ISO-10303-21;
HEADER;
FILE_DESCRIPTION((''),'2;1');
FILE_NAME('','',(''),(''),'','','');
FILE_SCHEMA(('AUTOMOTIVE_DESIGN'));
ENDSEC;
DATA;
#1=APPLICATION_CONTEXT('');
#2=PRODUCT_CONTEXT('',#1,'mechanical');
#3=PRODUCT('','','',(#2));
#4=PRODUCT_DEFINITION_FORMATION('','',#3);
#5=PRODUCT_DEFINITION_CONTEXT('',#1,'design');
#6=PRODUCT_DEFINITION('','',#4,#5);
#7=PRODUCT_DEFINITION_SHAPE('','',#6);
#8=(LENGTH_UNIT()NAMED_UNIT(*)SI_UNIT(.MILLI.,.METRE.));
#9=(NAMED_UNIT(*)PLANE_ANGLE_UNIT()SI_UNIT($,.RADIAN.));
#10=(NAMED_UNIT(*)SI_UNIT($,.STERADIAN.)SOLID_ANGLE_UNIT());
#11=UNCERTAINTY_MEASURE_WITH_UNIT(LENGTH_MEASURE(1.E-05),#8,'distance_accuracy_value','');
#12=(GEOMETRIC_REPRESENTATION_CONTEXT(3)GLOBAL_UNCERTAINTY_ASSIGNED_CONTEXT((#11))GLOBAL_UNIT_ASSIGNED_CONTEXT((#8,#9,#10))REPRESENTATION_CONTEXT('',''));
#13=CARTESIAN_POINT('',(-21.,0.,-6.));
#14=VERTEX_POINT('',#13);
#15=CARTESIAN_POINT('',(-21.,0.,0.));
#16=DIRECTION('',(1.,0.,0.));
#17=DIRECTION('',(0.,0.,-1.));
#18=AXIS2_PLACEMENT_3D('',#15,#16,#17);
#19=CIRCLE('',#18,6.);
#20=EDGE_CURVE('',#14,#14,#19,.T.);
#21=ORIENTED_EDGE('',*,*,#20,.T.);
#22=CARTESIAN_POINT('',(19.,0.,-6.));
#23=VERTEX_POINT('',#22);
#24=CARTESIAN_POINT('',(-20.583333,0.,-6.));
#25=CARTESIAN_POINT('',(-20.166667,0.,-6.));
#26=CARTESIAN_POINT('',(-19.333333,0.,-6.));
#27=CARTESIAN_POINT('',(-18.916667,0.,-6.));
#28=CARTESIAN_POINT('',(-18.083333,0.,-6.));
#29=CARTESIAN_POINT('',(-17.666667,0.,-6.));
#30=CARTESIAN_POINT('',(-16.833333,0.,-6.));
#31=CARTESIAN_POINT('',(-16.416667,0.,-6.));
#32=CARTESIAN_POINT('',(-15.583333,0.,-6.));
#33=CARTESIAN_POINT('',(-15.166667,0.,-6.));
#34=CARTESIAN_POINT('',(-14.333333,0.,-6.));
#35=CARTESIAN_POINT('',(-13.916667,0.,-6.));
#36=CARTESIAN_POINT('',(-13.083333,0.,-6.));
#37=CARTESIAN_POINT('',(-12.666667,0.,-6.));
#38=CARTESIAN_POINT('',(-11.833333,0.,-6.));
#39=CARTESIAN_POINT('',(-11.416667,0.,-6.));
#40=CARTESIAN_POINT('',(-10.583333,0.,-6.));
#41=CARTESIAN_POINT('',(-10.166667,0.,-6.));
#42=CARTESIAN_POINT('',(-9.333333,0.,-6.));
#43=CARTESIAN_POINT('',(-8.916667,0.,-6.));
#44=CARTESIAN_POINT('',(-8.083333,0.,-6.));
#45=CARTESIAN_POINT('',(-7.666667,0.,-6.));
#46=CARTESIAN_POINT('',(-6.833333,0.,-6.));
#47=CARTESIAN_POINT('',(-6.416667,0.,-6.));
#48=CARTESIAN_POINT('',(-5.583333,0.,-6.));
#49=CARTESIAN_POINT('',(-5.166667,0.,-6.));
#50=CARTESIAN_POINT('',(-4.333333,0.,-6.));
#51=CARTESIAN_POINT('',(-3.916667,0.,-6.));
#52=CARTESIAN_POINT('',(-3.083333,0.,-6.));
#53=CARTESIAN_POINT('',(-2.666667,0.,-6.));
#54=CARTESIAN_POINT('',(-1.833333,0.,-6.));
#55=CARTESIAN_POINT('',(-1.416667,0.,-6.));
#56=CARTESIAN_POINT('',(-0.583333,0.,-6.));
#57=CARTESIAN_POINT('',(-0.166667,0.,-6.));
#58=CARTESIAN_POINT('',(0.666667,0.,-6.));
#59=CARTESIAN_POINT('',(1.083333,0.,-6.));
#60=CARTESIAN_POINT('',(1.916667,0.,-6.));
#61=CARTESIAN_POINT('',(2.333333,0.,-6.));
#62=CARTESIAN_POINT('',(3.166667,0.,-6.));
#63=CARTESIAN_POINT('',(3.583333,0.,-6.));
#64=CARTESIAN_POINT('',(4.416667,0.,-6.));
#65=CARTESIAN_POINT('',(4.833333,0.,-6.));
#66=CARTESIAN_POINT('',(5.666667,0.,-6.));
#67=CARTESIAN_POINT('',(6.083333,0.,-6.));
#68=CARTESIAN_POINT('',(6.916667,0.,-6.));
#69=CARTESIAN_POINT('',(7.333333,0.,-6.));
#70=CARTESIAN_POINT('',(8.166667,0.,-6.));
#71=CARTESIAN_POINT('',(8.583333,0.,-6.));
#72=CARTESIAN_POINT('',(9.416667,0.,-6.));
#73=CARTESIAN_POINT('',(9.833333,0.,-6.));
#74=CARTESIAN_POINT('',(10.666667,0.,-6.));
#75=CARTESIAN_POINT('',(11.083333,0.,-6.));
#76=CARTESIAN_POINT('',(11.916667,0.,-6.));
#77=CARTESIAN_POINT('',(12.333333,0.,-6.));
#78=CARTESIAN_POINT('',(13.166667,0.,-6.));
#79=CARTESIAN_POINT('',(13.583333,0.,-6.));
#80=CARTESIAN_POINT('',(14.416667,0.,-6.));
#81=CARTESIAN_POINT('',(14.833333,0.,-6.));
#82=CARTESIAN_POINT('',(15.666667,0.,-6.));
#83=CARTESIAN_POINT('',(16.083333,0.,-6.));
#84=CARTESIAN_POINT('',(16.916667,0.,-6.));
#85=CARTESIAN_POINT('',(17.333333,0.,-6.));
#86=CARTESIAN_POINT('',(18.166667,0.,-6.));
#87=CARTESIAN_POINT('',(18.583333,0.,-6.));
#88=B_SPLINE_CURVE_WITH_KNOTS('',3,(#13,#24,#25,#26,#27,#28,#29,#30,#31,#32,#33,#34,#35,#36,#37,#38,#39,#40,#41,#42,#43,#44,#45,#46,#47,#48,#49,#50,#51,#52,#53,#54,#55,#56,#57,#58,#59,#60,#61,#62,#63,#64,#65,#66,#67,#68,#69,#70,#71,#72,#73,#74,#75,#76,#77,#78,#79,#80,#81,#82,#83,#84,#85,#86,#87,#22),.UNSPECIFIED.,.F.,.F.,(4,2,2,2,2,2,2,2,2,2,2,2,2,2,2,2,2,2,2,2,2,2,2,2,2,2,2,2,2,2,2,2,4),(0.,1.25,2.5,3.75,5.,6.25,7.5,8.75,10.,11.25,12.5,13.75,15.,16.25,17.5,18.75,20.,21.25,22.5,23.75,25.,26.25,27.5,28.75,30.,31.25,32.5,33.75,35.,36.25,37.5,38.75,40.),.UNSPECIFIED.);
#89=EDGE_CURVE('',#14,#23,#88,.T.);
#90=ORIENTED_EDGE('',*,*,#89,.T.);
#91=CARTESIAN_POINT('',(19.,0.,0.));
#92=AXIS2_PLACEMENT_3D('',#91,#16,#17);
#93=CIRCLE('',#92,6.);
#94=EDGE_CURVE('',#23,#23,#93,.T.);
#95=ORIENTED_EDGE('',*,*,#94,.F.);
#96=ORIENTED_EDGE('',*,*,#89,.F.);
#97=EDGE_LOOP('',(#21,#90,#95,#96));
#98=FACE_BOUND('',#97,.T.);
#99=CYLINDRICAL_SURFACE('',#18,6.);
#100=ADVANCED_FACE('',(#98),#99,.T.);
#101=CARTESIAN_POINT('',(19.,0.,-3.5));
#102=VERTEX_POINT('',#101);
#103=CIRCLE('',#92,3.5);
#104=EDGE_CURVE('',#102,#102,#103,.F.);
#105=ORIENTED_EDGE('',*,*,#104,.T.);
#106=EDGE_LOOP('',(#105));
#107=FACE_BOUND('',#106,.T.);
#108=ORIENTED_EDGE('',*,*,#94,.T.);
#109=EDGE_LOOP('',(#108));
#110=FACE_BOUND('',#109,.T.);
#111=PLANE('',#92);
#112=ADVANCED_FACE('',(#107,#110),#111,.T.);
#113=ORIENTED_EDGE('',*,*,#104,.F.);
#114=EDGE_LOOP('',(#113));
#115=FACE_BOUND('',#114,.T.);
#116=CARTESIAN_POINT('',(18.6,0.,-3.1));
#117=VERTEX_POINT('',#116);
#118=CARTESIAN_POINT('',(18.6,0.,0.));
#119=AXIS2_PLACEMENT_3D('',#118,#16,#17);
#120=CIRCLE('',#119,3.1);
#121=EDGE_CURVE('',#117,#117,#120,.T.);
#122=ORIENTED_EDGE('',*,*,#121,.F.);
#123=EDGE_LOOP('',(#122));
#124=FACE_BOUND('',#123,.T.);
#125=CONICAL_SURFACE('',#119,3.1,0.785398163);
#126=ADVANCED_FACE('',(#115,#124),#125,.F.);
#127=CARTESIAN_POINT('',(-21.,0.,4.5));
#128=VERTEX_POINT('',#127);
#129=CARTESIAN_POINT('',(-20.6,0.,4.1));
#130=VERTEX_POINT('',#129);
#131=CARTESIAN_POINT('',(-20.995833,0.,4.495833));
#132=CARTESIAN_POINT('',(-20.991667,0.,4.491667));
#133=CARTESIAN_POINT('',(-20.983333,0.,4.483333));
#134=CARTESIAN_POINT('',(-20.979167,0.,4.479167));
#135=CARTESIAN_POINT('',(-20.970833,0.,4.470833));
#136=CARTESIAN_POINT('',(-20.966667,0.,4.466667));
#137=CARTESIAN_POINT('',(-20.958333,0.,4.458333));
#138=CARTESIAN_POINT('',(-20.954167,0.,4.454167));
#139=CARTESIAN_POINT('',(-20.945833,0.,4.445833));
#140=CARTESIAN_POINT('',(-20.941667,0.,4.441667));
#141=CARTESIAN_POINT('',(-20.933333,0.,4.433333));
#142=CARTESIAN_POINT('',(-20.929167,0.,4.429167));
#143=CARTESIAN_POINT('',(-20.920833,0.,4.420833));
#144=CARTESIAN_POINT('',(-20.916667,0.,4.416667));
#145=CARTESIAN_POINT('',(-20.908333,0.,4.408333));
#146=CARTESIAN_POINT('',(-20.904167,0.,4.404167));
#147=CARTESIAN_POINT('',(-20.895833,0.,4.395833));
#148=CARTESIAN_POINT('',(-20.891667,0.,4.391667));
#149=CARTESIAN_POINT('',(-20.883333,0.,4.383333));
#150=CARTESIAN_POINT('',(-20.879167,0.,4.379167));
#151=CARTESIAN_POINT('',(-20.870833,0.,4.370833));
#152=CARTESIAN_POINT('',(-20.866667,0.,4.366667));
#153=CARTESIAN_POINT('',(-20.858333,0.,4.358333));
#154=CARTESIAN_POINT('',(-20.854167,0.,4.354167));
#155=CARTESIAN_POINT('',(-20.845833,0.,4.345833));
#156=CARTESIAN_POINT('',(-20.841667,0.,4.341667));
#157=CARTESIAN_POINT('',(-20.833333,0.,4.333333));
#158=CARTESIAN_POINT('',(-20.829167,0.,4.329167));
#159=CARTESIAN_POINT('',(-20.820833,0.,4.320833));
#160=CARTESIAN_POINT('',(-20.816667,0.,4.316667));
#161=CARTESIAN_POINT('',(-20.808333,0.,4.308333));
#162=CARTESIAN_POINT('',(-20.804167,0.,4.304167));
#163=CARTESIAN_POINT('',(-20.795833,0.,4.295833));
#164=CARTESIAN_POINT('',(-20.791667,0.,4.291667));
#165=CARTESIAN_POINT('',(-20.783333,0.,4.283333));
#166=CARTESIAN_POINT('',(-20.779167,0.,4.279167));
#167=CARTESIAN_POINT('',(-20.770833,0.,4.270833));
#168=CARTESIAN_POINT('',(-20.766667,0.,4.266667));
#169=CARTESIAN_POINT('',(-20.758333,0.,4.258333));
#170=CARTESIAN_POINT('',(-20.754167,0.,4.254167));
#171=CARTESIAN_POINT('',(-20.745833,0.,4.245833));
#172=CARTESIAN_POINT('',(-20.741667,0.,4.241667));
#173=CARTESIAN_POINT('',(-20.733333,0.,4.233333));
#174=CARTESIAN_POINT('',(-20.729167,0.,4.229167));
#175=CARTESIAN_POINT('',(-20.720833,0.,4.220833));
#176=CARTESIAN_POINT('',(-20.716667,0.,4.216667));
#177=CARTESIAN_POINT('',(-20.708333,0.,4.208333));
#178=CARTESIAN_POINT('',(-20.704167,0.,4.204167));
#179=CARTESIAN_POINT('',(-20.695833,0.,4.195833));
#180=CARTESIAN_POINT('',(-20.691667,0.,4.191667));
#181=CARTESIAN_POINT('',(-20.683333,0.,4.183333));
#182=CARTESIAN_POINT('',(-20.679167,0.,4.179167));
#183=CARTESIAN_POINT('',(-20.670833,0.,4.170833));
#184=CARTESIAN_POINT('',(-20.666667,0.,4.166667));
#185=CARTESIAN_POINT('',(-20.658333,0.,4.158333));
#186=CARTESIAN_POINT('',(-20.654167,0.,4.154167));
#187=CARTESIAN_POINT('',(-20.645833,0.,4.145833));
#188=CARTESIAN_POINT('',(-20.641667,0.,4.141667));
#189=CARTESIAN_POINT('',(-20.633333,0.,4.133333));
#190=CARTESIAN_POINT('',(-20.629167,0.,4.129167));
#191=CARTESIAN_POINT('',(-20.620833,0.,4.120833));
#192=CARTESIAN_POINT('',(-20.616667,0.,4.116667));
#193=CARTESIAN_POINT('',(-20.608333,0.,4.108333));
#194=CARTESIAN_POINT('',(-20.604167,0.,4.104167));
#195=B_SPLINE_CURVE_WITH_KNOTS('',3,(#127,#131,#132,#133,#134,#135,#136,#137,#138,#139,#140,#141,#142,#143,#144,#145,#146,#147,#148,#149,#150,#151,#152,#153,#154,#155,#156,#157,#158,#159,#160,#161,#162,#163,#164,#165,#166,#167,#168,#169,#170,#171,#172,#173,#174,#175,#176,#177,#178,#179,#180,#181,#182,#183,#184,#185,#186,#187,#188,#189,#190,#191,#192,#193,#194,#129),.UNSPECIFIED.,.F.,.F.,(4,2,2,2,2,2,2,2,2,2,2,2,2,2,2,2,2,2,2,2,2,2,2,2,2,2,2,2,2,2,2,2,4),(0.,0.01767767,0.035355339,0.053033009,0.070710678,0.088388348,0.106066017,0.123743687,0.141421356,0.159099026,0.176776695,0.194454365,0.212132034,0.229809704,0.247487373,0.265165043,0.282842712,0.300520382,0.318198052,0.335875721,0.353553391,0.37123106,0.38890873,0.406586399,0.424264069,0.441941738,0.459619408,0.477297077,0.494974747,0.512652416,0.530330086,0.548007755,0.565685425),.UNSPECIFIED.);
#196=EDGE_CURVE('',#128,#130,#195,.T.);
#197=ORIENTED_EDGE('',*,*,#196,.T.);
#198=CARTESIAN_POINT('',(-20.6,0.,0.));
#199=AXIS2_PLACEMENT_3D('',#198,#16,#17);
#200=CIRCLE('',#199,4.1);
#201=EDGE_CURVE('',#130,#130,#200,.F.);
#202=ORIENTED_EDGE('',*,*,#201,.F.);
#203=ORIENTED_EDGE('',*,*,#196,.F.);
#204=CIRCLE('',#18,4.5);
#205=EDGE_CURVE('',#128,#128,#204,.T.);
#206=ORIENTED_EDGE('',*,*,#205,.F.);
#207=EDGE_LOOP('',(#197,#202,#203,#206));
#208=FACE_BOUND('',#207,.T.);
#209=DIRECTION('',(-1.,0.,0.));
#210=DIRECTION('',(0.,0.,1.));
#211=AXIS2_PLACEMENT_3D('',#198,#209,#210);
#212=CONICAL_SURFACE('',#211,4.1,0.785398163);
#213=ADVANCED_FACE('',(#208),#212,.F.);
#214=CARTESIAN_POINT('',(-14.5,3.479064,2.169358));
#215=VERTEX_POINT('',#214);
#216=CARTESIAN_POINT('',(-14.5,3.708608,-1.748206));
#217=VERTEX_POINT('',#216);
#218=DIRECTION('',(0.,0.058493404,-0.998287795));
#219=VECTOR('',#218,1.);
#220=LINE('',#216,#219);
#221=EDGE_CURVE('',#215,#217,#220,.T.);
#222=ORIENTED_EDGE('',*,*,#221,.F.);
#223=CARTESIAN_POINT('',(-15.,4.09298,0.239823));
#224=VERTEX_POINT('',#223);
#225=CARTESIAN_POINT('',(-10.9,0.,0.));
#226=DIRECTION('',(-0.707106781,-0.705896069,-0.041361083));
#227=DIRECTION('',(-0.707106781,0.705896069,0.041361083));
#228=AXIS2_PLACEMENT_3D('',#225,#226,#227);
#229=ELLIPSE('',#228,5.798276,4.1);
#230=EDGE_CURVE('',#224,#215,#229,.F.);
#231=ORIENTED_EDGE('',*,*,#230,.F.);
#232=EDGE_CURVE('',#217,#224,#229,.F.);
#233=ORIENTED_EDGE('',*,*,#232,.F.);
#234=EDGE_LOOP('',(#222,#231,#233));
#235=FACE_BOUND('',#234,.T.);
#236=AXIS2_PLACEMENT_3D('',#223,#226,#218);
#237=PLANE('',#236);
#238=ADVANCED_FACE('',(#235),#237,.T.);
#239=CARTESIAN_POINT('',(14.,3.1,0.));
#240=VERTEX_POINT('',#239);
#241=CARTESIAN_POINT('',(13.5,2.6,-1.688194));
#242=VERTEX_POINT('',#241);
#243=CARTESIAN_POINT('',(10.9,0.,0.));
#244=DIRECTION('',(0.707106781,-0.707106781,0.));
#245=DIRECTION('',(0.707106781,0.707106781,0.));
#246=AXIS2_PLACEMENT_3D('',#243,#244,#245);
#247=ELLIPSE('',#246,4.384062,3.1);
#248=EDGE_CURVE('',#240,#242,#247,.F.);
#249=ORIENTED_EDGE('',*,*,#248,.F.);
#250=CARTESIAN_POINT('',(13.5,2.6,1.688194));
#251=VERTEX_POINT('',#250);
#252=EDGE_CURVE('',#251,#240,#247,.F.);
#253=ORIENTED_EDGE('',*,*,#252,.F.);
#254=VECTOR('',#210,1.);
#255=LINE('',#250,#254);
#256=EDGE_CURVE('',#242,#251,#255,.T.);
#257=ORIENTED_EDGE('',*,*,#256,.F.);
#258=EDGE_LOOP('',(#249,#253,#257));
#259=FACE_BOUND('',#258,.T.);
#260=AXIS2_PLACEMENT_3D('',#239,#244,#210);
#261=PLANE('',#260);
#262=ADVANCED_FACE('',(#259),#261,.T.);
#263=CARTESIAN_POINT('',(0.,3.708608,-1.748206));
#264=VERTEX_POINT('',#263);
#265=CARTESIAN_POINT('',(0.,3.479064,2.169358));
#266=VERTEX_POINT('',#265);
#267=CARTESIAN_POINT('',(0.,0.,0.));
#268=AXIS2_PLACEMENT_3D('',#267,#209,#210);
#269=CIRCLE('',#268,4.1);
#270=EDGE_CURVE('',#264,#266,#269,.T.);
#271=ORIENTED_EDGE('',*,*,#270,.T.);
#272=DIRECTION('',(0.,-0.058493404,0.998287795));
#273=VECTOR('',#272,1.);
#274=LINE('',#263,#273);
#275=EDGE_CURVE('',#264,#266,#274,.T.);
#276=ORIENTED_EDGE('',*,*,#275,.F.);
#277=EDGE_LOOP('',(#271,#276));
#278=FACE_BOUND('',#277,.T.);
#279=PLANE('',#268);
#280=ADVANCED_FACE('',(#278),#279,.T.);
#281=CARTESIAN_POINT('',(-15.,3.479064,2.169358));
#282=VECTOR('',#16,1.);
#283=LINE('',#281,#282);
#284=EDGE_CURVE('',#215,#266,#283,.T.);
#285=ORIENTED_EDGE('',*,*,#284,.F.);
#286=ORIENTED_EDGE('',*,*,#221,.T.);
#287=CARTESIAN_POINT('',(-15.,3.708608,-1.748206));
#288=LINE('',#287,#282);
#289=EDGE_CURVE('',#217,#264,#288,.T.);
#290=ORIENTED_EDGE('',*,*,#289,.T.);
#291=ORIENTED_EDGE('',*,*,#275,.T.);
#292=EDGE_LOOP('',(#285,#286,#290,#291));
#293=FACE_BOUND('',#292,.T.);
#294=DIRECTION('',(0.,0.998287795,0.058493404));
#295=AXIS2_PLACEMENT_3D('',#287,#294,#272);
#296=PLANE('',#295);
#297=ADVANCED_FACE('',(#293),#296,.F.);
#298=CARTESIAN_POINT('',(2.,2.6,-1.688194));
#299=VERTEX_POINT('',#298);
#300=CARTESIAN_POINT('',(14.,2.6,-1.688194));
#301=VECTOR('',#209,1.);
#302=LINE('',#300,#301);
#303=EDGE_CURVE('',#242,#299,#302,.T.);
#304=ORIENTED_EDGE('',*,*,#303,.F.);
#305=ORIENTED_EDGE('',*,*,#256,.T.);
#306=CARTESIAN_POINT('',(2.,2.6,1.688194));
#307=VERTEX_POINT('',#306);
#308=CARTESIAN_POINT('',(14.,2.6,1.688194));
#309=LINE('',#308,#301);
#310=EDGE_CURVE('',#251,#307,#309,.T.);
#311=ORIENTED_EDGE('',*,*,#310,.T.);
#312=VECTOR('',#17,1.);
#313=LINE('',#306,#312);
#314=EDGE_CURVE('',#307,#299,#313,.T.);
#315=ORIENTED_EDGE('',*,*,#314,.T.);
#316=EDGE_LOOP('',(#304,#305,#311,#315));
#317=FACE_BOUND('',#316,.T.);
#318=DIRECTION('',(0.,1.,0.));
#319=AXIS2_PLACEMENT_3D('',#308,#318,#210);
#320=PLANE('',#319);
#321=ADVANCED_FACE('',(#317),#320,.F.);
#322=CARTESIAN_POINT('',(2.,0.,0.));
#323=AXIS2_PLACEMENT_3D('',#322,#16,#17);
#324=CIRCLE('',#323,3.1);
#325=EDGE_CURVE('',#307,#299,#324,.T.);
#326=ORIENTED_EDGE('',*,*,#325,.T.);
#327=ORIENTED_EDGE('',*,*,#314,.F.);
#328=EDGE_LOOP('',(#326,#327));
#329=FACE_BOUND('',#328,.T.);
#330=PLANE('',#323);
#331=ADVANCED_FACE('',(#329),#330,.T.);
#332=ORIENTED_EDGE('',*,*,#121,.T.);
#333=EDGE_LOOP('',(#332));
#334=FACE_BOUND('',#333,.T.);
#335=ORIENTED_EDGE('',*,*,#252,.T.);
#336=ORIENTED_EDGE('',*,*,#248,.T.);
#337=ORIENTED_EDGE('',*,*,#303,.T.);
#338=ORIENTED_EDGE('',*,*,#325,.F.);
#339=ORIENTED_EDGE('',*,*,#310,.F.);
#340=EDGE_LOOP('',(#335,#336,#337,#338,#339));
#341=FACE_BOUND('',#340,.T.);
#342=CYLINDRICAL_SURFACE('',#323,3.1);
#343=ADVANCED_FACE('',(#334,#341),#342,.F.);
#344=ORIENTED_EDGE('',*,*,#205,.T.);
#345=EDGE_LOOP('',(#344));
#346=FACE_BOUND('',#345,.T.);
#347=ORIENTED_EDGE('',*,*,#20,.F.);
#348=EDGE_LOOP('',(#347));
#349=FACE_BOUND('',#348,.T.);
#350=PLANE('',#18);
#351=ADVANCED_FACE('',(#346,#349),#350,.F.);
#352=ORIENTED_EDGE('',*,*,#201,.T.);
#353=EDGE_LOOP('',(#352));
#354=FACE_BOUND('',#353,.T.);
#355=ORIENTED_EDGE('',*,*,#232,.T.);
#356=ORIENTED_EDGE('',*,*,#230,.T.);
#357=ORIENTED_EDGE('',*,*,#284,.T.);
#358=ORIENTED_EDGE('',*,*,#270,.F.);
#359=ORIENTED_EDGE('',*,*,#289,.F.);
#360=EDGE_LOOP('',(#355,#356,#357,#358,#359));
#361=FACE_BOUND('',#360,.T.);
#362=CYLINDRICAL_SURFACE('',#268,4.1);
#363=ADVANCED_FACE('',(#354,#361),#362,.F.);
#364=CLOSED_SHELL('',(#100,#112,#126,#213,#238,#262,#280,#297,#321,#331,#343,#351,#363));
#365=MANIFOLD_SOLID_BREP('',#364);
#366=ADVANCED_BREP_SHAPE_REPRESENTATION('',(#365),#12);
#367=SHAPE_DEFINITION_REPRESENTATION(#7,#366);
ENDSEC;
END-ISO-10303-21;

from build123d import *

# Parameters (mm, degrees)
EXTRUDE_1_DEPTH      = 19
EXTRUDE_1_DEPTH_BACK = 21
SKETCH_1_R           = 6
SKETCH_3_R           = 3.1
CUT_EXTRUDE_1_DEPTH  = 17
SKETCH_4_R           = 4.1
CUT_EXTRUDE_2_DEPTH  = 21
EXTRUDE_START        = 12
EXTRUDE_2_DEPTH      = 12
EXTRUDE_START_2      = 15
EXTRUDE_3_DEPTH      = 15
CHAMFER_1_SIZE       = 0.4
CHAMFER_2_SIZE       = 0.5


with BuildPart() as part:
    # 草图1 → 凸台-拉伸1 (new, two sides: drawn at the far end of the back side and taken through both)
    with BuildSketch(Plane(origin=(0, 0, 0), x_dir=(0, 0, -1), z_dir=(1, 0, 0)).offset(-EXTRUDE_1_DEPTH_BACK)):
        Circle(SKETCH_1_R)
    extrude(amount=EXTRUDE_1_DEPTH + EXTRUDE_1_DEPTH_BACK)

    # 草图3 → 切除-拉伸1 (cut)
    with BuildSketch(Plane(origin=(19, 0, 0), x_dir=(0, 0, -1), z_dir=(1, 0, 0))):
        Circle(SKETCH_3_R)
    extrude(amount=-CUT_EXTRUDE_1_DEPTH, mode=Mode.SUBTRACT)

    # 草图4 → 切除-拉伸2 (cut)
    with BuildSketch(Plane.ZY.offset(21)):
        Circle(SKETCH_4_R)
    extrude(amount=-CUT_EXTRUDE_2_DEPTH, mode=Mode.SUBTRACT)

    # 草图5 → 凸台-拉伸2 (add)
    with BuildSketch(Plane(origin=(2, 0, 0), x_dir=(0, 0, -1), z_dir=(1, 0, 0)).offset(EXTRUDE_START)):
        with BuildLine():
            Line((-1.688194302, 2.6), (1.688194302, 2.6))
            ThreePointArc((1.688194302, 2.6), (0, 3.1), (-1.688194302, 2.6))
        make_face()
    extrude(amount=-EXTRUDE_2_DEPTH)

    # 草图6 → 凸台-拉伸3 (add)
    with BuildSketch(Plane.ZY.offset(EXTRUDE_START_2)):
        with BuildLine():
            Line((-1.748205844, 3.708608408), (2.169358352, 3.479063716))
            ThreePointArc((2.169358352, 3.479063716), (0.239822956, 4.09297996), (-1.748205844, 3.708608408))
        make_face()
    extrude(amount=-EXTRUDE_3_DEPTH)

    # 倒角1
    chamfer_1_edges = [part.edges().sort_by_distance(p)[0] for p in [
        (-21, 0, -4.1),
        (19, 0, 3.1),
    ]]
    chamfer(chamfer_1_edges, length=CHAMFER_1_SIZE)

    # 倒角2
    chamfer_2_edges = [part.edges().sort_by_distance(p)[0] for p in [
        (-15, 3.593836062, 0.210576254),
        (14, 2.6, 0),
    ]]
    chamfer(chamfer_2_edges, length=CHAMFER_2_SIZE - 0.0001)  # a hair under: the kernel refuses the full size


solid = part.part
